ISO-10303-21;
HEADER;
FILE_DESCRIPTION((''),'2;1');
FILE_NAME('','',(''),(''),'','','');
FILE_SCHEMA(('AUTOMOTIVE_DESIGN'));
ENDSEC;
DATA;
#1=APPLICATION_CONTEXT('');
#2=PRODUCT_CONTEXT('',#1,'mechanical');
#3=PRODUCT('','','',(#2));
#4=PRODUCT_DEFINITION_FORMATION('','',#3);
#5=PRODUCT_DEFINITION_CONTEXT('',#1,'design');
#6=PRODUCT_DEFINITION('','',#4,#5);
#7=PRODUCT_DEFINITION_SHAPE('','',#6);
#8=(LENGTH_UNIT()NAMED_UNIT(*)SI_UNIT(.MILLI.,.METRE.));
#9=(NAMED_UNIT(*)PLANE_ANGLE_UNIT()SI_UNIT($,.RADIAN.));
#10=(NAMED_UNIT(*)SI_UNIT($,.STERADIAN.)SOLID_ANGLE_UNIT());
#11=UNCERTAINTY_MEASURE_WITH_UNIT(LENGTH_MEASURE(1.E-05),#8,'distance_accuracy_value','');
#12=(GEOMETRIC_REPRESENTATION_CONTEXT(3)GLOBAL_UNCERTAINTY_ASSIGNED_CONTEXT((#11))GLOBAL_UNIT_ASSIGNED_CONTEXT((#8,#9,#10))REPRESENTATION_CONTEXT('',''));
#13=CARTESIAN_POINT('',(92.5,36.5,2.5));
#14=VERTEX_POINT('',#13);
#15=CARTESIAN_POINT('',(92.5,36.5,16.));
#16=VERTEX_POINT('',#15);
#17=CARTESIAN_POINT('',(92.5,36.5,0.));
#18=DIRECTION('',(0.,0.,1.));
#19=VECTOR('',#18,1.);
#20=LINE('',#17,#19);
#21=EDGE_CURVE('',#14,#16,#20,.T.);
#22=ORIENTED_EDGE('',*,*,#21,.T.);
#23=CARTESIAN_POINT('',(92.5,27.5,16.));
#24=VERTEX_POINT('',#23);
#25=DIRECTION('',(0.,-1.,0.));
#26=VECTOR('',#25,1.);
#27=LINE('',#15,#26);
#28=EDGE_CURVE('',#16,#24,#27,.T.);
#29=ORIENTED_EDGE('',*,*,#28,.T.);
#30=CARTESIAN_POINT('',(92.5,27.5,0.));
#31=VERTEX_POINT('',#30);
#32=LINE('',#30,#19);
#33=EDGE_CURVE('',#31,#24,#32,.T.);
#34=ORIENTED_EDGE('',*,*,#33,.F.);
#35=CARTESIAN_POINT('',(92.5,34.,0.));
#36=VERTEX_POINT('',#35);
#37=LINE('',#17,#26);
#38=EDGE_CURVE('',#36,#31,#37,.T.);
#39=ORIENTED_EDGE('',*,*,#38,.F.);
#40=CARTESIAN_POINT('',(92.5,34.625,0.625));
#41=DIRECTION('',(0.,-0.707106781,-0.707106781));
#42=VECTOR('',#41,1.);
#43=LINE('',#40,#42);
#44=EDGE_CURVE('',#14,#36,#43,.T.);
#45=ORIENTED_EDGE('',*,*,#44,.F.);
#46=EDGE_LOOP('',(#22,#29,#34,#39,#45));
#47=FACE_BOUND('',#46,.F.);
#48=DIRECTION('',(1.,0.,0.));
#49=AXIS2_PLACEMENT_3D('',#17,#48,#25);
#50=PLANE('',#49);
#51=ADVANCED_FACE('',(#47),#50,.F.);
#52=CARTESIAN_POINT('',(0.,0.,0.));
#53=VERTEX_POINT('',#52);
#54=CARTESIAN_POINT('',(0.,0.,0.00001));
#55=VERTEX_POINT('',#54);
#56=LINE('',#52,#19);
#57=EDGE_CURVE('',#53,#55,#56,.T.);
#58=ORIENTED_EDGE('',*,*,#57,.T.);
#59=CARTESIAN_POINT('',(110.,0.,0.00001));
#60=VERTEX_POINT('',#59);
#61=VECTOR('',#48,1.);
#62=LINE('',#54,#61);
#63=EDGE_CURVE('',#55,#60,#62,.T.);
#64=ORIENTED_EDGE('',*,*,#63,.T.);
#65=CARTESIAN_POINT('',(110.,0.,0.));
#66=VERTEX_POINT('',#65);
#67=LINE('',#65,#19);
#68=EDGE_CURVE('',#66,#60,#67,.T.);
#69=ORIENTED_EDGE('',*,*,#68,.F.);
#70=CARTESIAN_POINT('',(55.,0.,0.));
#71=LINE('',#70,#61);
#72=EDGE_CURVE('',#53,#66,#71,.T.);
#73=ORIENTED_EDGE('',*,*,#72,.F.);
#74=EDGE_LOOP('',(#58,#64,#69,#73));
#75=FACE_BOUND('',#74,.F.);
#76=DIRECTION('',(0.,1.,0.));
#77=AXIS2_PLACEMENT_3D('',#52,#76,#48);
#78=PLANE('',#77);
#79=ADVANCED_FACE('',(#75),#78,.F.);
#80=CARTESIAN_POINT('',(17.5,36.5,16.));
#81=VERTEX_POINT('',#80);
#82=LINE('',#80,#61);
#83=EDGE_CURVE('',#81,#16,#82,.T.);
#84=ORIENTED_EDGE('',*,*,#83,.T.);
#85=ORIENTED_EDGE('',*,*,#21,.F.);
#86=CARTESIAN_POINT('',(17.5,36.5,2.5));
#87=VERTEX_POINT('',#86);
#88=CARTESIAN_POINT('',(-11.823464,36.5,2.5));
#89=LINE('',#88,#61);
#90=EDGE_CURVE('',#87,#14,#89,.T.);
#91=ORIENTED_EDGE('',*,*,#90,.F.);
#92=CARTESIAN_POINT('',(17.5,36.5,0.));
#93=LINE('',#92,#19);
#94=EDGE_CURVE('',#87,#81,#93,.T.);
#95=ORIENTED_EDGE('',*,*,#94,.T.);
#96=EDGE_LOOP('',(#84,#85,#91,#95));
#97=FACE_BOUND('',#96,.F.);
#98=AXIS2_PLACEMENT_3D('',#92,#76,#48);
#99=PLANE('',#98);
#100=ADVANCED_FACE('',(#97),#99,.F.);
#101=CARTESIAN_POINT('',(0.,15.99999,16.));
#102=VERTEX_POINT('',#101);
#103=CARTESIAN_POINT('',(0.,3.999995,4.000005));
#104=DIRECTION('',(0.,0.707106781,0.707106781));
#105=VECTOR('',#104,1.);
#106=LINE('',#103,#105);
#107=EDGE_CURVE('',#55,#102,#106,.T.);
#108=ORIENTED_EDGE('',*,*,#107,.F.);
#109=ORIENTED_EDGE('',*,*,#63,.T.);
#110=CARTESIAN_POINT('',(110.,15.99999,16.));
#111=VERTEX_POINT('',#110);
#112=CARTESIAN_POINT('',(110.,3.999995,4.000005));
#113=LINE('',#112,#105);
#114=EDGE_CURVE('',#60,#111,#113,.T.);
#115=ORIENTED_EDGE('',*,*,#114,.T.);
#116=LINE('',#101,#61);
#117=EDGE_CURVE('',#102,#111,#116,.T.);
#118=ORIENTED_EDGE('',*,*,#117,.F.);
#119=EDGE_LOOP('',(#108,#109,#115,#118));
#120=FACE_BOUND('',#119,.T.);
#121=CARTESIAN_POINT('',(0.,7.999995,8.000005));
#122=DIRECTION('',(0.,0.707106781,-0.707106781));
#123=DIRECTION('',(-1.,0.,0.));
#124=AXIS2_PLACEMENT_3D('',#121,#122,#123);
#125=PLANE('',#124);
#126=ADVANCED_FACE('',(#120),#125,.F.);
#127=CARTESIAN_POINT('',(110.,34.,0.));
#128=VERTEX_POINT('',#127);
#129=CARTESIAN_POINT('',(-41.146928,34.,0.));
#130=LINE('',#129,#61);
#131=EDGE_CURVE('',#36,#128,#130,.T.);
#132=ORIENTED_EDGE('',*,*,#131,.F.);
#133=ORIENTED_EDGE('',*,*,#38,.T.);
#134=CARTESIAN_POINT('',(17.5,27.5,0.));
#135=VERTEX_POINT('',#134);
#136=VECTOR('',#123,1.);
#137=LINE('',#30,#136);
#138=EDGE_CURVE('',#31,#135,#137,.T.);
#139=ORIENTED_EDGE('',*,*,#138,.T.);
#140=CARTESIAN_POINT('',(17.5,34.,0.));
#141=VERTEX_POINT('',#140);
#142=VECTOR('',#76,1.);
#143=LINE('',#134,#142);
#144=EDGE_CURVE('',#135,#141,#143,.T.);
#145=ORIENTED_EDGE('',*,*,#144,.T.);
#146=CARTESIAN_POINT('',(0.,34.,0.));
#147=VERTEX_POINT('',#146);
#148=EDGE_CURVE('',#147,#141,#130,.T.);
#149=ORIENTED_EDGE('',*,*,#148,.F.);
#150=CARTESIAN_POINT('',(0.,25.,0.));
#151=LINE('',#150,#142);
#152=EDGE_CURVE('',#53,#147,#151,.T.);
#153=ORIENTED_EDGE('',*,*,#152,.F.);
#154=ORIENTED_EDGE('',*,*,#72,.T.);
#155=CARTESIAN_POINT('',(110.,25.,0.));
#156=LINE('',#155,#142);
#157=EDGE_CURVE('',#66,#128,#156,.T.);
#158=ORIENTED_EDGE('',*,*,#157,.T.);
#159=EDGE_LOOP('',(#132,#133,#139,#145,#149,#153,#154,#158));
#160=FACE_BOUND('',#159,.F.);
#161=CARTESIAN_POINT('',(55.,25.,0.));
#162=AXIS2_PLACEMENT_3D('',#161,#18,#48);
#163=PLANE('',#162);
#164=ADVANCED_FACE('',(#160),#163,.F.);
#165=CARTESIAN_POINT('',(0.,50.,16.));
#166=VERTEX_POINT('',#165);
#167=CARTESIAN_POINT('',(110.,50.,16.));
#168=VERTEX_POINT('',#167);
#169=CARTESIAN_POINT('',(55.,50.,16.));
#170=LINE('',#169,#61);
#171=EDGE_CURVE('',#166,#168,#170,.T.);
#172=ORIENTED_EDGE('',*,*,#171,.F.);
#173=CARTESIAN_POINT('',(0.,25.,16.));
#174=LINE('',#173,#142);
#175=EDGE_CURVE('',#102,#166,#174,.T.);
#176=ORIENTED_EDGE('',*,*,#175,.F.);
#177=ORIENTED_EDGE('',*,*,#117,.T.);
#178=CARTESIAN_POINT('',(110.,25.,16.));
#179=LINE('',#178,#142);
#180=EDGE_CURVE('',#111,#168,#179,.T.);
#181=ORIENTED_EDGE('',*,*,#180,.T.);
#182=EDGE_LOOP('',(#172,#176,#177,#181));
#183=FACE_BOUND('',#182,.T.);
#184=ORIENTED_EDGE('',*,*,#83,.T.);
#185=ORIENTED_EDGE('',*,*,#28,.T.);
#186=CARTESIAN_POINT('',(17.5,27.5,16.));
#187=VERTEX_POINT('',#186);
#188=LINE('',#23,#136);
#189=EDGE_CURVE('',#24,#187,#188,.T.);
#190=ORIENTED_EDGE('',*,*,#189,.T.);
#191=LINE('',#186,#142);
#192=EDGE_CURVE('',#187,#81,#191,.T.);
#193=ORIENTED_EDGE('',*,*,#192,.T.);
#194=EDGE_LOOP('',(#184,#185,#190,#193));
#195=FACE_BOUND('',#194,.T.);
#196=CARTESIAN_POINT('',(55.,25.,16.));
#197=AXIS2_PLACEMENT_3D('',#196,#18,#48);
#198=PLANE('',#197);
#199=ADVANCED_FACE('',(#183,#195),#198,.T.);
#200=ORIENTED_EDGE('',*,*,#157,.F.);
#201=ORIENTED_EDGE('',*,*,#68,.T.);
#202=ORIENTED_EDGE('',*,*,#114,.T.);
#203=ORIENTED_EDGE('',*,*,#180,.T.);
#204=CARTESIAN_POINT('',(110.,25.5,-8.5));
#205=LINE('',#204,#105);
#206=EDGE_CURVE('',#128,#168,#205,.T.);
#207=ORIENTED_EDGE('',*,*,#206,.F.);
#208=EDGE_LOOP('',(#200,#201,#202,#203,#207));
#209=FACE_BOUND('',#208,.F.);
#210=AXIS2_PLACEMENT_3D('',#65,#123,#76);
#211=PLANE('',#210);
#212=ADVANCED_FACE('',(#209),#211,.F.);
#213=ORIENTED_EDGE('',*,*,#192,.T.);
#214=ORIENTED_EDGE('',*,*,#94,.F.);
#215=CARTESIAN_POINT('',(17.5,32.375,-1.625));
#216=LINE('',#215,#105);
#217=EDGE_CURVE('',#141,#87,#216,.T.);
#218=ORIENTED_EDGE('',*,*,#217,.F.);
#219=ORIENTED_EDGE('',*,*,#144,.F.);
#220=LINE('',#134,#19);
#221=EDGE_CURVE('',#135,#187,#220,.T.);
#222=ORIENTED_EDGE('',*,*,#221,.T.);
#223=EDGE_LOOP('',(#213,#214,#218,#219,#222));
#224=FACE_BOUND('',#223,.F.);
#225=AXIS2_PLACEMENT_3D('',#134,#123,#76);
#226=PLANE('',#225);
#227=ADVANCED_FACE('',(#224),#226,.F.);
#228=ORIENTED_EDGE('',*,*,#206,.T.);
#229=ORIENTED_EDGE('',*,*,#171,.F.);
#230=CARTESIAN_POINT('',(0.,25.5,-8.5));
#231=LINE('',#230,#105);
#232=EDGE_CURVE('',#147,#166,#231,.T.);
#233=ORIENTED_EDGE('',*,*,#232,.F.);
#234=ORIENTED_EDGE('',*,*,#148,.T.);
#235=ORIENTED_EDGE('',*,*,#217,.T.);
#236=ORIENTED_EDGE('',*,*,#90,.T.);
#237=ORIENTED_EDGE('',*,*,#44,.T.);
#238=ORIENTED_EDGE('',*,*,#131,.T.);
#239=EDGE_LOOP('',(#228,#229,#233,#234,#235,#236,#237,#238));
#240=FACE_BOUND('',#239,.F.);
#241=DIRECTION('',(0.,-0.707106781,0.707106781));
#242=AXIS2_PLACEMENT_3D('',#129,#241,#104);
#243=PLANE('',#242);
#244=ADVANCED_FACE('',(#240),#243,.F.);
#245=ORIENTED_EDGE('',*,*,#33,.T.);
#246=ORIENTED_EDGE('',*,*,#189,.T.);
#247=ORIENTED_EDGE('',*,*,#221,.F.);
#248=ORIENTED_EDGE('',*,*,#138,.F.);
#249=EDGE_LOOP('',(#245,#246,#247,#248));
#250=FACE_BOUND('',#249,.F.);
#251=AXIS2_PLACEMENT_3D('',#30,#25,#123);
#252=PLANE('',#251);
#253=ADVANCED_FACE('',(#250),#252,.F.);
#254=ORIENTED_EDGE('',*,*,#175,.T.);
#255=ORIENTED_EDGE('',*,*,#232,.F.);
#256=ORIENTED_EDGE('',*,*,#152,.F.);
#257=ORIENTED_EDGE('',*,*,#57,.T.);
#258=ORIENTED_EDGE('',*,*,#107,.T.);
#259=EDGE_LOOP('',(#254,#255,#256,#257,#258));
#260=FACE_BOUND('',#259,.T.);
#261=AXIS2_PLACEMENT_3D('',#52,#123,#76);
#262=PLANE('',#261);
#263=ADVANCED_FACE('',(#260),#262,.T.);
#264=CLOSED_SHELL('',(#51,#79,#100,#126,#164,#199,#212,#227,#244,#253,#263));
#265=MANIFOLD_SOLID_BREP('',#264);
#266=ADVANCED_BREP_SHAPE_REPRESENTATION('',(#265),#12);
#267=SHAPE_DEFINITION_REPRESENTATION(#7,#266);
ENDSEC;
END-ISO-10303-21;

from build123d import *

# Parameters (mm, degrees)
F0_W        = 110
F0_H        = 50
F1_DEPTH    = 16
F2_SIZE     = 15.99999
F3_T1_DEPTH = 192.2938556149


# Not quite as in the source:
# - a fillet or chamfer that OpenCascade refuses, or shapes differently, is made with other operations: its cross-section is extruded or revolved along the edge and cut away or added
# - a fillet or chamfer is up to 0.001 mm smaller than in the source, because OpenCascade refuses the exact size


with BuildPart() as f1:
    # F0 (on Top) → F1 (new body)
    with BuildSketch(Plane.XY):
        with Locations((55, 25)):
            Rectangle(F0_W, F0_H)
        Polygon((17.5, 36.5), (55, 36.5), (92.5, 36.5), (92.5, 27.5), (17.5, 27.5), align=None, mode=Mode.SUBTRACT)
    extrude(amount=F1_DEPTH)

    # F2 (size 16 in the source; OpenCascade refuses exactly that, so slightly less here)
    f2_edges = [f1.edges().sort_by_distance(p)[0] for p in [
        (55, 0, 16),
    ]]
    chamfer(f2_edges, length=F2_SIZE)

    # F3: chamfer of 16 on 1 edges, made by hand

    # F3_s2 → F3_t1 (cut)
    with BuildSketch(Plane.YZ.offset(-41.1469278075)):
        Polygon((34, 0), (50, 16), (50, 0), align=None)
    extrude(amount=F3_T1_DEPTH, mode=Mode.SUBTRACT)


solid = f1.part
